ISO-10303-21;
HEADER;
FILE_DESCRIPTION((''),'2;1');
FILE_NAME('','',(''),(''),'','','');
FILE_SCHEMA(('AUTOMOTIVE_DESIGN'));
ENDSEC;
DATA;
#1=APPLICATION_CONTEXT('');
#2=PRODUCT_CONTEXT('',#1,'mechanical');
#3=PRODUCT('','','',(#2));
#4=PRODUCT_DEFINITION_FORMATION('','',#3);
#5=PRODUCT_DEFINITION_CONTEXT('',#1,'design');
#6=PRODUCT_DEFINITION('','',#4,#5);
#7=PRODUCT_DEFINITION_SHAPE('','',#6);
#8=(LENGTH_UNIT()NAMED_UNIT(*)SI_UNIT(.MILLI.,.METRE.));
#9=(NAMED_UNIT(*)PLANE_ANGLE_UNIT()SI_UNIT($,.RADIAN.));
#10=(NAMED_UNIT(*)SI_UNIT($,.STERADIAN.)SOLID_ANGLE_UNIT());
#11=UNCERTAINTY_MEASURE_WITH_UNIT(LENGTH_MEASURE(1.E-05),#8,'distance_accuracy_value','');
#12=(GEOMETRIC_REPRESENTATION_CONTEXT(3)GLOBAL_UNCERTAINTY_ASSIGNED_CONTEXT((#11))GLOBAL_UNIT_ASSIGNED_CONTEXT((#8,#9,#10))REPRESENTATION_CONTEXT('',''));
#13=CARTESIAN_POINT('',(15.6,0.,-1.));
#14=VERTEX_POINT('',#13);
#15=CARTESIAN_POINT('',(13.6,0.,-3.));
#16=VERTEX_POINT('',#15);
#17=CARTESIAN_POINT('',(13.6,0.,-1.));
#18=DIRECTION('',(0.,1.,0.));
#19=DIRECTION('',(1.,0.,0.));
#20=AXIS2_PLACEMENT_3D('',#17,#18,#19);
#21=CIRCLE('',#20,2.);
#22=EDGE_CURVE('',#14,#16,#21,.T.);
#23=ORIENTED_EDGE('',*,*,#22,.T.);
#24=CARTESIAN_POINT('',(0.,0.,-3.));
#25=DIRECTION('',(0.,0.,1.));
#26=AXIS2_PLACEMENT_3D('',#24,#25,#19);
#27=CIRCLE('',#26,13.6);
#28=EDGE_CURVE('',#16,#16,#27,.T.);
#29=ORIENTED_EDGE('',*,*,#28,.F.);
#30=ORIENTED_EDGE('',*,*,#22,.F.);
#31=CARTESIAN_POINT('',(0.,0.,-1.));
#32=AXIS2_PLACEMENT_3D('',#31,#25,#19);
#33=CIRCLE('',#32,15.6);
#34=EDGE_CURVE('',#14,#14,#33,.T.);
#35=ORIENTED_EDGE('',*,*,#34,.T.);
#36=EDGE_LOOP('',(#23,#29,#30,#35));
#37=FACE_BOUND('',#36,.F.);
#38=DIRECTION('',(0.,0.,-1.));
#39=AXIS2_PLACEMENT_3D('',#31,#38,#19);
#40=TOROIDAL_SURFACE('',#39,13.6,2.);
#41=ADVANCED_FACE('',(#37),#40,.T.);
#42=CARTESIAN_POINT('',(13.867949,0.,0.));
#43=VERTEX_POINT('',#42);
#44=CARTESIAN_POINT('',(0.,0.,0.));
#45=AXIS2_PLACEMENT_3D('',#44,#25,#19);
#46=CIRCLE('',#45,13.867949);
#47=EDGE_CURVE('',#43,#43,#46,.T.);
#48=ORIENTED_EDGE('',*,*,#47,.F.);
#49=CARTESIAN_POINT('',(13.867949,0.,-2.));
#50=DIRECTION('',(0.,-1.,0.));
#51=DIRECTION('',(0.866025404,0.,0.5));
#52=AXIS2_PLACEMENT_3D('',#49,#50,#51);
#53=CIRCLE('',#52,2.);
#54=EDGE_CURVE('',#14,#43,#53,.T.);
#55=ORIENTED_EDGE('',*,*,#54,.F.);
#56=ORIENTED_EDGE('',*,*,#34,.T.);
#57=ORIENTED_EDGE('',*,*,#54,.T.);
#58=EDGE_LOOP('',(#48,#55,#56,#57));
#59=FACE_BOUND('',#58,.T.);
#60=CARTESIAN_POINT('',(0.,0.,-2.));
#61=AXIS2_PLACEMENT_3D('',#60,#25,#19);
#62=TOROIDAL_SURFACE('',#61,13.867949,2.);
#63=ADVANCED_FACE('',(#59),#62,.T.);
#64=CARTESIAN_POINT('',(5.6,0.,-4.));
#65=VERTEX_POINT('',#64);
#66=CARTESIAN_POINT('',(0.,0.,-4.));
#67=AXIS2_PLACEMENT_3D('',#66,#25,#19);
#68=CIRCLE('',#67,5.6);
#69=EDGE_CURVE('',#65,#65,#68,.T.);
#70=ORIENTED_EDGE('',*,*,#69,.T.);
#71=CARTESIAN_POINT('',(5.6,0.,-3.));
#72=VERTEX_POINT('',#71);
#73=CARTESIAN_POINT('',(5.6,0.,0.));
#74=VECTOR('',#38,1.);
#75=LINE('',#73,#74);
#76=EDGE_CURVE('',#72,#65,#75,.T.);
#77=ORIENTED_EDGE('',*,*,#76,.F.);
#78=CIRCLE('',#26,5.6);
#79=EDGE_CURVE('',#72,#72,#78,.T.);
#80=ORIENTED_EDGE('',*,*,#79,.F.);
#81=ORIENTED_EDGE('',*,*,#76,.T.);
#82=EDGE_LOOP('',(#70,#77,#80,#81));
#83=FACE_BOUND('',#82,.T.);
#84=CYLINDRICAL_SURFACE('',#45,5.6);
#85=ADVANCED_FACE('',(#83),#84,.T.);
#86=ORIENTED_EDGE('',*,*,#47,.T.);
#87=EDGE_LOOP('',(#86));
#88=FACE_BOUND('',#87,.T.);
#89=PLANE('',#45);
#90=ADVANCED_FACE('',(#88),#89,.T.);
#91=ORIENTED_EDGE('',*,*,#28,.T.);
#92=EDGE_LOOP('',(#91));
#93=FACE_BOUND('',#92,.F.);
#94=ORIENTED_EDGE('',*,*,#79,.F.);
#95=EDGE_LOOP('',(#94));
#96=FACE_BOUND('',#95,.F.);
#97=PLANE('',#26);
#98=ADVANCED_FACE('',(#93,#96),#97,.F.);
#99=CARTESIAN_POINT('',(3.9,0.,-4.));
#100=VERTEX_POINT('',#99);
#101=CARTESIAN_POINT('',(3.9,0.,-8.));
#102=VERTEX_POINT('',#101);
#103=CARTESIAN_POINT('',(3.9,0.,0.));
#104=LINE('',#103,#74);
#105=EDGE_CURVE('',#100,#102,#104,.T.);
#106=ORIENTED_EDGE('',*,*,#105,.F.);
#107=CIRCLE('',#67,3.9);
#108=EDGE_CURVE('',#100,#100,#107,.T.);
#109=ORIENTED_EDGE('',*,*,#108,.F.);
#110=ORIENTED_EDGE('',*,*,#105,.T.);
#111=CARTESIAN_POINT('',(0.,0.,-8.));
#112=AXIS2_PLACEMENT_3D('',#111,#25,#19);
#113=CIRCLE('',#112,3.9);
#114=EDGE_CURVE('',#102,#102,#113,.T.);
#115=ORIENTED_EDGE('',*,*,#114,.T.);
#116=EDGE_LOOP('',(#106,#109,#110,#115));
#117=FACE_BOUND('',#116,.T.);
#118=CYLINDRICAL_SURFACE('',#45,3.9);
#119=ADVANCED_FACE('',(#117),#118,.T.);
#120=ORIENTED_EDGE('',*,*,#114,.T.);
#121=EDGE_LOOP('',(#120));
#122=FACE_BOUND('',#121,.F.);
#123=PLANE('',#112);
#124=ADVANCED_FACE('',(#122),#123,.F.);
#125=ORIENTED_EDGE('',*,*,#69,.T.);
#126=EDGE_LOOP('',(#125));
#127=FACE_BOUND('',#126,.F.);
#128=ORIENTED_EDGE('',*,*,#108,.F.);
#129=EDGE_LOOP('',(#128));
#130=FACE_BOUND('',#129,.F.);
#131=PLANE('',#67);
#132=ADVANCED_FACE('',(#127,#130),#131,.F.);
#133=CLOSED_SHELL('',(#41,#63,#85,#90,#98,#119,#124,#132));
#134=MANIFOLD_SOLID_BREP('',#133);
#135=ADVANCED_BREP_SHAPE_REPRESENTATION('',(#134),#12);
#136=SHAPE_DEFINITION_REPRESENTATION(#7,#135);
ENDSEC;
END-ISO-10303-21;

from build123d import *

# Parameters (mm, degrees)
F0_R     = 15.6
F0_R_2   = 5.6
F0_R_3   = 3.9
F1_DEPTH = 3
F2_DEPTH = 4
F3_DEPTH = 8
F4_R     = 2


# Not quite as in the source:
# - a fillet or chamfer that OpenCascade refuses, or shapes differently, is made with other operations: its cross-section is extruded or revolved along the edge and cut away or added


with BuildPart() as f1:
    # F0 (on Top) → F1 (new body)
    with BuildSketch(Plane.XY):
        Circle(F0_R)
        Circle(F0_R_2, mode=Mode.SUBTRACT)
        Circle(F0_R_2)
        Circle(F0_R_3, mode=Mode.SUBTRACT)
        Circle(F0_R_3)
    extrude(amount=-F1_DEPTH)

    # F0 (on Top) → F2 (join)
    with BuildSketch(Plane.XY):
        Circle(F0_R_2)
        Circle(F0_R_3, mode=Mode.SUBTRACT)
        Circle(F0_R_3)
    extrude(amount=-F2_DEPTH)

    # F0 (on Top) → F3 (join)
    with BuildSketch(Plane.XY):
        Circle(F0_R_3)
    extrude(amount=-F3_DEPTH)

    # F4
    f4_edges = [f1.edges().sort_by_distance(p)[0] for p in [
        (-15.6, 0, -3),
    ]]
    fillet(f4_edges, radius=F4_R)

    # F5: fillet of radius 2 on 1 edges, made by hand

    # F5_s1 → F5_t2 (revolve, cut)
    with BuildSketch(Plane.XZ):
        with BuildLine():
            ThreePointArc((15.6, -1), (14.8679491924, -0.2679491924), (13.8679491924, 0))
            Line((13.8679491924, 0), (15.6, 0))
            Line((15.6, 0), (15.6, -1))
        make_face()
    revolve(axis=Axis((0, 0, 0), (0, 0, 1)), mode=Mode.SUBTRACT)


solid = f1.part
